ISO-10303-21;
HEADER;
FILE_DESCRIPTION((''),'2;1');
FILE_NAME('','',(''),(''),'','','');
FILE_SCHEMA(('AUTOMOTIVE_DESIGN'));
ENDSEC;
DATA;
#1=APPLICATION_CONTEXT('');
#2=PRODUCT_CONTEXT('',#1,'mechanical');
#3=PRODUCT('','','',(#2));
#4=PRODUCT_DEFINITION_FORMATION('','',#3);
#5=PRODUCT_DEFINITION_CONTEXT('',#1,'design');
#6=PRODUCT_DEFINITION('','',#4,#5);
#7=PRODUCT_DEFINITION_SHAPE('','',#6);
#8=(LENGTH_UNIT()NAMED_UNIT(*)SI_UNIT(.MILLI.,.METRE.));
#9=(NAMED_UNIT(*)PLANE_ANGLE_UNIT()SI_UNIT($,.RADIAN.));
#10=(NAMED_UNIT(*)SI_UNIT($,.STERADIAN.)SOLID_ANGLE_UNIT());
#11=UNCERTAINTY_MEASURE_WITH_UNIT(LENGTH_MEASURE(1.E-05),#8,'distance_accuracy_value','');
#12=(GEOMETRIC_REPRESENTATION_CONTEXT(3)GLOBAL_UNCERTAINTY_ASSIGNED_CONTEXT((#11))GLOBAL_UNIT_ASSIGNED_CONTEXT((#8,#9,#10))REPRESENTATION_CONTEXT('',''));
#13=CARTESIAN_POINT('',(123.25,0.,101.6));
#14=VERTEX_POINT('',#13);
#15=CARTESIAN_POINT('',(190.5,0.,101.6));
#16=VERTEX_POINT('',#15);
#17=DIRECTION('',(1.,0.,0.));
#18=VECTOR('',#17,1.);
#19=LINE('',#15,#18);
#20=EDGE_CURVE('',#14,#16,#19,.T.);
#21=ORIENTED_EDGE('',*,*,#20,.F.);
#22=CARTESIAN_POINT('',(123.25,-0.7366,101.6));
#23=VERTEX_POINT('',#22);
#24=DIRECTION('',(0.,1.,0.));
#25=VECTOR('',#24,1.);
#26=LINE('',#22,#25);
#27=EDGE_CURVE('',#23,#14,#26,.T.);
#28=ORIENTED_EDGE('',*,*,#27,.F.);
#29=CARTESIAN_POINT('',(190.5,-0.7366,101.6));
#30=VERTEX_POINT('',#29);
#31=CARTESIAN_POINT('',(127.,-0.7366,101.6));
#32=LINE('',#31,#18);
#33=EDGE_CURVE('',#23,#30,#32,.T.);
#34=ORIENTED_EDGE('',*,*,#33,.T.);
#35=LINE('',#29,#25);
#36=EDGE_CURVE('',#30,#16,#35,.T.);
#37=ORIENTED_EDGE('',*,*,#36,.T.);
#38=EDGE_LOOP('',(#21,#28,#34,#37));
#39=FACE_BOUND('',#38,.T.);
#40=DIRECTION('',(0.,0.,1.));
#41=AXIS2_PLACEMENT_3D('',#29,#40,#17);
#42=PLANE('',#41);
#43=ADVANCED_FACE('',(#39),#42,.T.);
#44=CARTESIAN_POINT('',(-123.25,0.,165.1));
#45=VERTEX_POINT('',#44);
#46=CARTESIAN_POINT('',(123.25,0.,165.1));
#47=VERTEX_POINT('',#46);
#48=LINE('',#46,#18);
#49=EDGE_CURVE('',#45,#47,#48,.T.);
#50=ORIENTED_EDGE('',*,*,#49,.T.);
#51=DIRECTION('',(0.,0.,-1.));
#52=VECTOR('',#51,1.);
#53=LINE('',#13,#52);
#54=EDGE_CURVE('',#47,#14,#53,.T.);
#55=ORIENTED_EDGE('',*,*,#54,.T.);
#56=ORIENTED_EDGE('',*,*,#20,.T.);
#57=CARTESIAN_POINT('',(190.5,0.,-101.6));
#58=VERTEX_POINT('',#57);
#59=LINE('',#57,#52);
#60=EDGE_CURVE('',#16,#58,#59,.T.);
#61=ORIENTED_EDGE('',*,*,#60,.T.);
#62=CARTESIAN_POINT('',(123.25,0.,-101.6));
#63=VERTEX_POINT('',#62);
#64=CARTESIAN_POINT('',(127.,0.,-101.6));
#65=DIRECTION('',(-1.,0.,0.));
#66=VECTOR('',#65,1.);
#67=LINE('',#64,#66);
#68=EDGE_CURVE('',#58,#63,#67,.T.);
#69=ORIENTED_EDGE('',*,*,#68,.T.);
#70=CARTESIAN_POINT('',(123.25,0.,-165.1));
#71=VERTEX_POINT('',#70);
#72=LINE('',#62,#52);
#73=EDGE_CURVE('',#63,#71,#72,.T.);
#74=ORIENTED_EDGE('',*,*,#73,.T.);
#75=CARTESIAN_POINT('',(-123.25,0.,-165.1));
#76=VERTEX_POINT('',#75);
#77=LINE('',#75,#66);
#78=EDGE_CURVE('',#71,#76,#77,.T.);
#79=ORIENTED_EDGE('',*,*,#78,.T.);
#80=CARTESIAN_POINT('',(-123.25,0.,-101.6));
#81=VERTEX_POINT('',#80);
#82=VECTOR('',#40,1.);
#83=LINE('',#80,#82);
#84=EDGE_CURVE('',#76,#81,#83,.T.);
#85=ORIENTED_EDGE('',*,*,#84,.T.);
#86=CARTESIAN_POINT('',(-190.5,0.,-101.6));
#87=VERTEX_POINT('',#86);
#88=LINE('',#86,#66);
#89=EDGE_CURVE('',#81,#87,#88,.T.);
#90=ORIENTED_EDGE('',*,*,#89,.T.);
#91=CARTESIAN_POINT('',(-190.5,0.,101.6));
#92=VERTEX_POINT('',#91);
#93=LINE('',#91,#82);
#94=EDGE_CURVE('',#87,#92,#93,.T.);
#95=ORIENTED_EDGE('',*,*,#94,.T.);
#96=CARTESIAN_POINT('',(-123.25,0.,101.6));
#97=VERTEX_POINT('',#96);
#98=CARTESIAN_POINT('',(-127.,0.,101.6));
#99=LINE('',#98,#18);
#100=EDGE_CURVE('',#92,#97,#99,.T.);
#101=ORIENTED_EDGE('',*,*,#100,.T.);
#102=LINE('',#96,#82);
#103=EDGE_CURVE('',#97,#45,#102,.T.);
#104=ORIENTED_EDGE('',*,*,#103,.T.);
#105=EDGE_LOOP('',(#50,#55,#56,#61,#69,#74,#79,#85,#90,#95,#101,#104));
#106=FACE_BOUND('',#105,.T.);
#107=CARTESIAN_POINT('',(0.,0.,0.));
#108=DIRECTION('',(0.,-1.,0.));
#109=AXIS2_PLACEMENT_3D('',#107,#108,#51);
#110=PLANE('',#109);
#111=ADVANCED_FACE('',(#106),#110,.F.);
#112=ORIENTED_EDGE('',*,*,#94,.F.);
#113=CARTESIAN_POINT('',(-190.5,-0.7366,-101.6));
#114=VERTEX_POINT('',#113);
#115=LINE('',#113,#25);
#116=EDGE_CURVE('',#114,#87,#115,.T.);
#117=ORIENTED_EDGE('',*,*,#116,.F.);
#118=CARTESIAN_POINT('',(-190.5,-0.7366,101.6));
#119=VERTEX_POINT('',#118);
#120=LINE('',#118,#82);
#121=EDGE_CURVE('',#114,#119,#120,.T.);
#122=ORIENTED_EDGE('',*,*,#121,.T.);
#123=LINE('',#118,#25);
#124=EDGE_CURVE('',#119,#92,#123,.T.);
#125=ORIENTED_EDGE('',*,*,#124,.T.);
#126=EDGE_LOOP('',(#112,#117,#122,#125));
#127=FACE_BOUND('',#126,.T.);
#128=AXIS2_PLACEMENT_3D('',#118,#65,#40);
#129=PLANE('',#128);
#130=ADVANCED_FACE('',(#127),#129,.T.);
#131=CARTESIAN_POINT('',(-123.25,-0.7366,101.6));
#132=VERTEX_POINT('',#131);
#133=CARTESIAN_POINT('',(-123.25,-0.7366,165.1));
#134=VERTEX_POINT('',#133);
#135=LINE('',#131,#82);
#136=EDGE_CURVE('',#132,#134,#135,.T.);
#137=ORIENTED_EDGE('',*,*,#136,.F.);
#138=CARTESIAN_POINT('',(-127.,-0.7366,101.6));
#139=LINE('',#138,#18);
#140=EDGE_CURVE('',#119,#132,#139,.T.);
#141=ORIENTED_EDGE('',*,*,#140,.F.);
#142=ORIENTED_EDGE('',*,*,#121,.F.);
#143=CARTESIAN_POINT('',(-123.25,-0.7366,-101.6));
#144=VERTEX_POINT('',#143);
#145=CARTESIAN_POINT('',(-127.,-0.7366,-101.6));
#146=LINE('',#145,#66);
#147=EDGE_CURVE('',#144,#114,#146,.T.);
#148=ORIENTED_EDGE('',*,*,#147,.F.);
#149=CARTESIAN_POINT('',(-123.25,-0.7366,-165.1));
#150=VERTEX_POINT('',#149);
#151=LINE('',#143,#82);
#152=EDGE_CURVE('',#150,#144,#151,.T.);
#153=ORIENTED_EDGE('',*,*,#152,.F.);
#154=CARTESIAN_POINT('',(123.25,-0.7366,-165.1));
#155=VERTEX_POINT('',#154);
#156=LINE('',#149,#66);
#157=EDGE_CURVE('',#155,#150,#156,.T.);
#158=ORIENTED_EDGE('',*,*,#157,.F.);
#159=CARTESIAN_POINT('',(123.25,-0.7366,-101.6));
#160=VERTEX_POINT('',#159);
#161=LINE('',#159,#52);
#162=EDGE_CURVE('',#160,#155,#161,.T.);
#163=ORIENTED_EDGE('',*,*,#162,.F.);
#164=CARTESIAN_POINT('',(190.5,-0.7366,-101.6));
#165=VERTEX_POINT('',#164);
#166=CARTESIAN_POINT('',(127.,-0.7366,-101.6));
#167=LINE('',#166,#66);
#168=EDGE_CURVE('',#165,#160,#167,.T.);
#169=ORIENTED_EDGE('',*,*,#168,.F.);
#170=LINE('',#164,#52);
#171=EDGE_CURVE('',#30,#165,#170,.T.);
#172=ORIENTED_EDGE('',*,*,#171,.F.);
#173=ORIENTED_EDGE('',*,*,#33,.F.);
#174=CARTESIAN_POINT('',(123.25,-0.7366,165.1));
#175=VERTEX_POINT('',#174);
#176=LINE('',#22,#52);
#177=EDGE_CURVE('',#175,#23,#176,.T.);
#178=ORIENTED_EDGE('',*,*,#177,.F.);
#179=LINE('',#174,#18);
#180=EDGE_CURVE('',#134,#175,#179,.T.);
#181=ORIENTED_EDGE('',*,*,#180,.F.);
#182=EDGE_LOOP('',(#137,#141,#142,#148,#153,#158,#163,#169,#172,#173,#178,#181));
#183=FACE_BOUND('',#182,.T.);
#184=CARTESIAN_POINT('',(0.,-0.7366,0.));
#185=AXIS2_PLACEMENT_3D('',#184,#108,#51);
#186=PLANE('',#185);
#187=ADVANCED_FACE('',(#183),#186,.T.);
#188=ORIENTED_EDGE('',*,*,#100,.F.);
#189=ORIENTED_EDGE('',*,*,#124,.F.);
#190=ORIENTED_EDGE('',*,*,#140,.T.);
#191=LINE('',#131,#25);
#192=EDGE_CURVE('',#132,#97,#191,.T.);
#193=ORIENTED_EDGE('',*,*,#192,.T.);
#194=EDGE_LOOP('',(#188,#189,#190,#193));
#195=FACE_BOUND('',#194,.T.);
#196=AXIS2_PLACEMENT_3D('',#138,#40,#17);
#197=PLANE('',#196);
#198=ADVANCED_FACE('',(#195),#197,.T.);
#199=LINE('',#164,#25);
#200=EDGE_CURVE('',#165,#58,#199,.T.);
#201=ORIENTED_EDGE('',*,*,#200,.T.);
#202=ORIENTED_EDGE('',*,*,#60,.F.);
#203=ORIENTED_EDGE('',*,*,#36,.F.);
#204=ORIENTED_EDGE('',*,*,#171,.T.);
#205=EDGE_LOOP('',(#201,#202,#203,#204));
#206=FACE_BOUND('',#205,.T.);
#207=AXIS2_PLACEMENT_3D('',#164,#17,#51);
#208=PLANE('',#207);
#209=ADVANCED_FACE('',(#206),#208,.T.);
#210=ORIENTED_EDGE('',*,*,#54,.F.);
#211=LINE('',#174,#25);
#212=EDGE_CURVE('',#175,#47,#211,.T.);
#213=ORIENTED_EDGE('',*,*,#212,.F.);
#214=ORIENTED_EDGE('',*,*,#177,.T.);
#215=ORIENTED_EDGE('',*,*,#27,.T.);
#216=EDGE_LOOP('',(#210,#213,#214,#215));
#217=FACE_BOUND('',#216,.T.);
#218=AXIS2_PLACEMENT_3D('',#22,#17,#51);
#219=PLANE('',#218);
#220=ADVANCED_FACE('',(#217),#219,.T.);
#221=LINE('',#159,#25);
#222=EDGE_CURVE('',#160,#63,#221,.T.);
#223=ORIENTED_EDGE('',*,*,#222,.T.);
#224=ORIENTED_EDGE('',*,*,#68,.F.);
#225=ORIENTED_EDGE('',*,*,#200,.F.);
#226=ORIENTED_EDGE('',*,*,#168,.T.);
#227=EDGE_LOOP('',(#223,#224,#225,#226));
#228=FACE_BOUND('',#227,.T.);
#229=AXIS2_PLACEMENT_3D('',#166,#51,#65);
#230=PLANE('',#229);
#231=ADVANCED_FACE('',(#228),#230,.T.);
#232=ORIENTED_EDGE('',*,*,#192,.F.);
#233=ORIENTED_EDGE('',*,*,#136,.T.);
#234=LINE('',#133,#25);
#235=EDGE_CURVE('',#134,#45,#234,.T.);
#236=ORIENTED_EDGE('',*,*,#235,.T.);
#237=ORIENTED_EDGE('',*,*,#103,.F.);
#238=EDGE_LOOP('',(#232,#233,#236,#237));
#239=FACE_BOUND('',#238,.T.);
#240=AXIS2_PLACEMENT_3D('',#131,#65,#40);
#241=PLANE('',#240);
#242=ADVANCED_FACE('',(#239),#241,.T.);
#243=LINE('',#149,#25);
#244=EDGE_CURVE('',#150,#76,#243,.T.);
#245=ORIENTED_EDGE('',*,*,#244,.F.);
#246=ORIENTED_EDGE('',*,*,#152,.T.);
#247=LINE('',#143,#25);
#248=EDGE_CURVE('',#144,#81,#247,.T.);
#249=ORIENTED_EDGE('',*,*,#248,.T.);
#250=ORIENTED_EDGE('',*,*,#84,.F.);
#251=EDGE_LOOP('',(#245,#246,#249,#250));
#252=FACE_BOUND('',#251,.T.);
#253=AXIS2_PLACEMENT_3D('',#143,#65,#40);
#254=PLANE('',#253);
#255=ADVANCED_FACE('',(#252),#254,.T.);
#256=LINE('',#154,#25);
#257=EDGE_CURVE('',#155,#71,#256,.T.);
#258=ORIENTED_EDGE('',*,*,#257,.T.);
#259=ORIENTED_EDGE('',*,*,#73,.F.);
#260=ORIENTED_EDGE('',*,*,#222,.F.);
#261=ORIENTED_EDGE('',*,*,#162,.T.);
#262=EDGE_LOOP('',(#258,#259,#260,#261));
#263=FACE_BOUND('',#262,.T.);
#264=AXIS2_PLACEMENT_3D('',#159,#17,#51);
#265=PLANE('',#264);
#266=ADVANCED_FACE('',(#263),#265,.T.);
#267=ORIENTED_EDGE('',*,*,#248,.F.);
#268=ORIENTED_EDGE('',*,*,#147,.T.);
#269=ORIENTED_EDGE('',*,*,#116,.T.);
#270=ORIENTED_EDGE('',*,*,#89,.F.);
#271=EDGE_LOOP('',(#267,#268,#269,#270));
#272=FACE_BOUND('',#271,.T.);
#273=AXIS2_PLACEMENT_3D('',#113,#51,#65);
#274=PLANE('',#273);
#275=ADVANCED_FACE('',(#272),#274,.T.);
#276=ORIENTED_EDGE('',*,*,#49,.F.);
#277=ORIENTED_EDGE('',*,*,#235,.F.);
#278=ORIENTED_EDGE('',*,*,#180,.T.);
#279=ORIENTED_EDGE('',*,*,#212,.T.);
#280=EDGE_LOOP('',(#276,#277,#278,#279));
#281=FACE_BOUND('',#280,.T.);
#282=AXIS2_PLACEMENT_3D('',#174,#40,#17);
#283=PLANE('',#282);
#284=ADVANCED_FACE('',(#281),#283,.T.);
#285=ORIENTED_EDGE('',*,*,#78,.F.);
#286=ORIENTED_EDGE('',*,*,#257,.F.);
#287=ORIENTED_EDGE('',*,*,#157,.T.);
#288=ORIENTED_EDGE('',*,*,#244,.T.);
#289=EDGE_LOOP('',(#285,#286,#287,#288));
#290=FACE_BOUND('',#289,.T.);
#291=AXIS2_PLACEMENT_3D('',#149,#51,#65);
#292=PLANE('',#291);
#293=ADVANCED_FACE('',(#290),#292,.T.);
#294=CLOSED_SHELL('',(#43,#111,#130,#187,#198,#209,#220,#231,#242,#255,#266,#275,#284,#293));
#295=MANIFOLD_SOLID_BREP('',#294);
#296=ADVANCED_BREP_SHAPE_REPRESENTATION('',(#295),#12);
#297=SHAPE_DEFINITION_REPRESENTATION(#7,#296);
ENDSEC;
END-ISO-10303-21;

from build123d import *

# Parameters (mm, degrees)
BASE_FLANGE1_DEPTH = 0.7366


# Sheet-metal steps are written as plain solids
with BuildPart() as part:
    # Sketch1 → Base-Flange1 (new body)
    with BuildSketch(Plane(origin=(0, 0, 0), x_dir=(1, 0, 0), z_dir=(0, 1, 0))):
        Polygon((-127, 101.6), (-123.25, 101.6), (-123.25, 165.1), (123.25, 165.1), (123.25, 101.6), (127, 101.6), (190.5, 101.6), (190.5, -101.6), (127, -101.6), (123.25, -101.6), (123.25, -165.1), (-123.25, -165.1), (-123.25, -101.6), (-127, -101.6), (-190.5, -101.6), (-190.5, 101.6), align=None)
    extrude(amount=-BASE_FLANGE1_DEPTH)


solid = part.part
